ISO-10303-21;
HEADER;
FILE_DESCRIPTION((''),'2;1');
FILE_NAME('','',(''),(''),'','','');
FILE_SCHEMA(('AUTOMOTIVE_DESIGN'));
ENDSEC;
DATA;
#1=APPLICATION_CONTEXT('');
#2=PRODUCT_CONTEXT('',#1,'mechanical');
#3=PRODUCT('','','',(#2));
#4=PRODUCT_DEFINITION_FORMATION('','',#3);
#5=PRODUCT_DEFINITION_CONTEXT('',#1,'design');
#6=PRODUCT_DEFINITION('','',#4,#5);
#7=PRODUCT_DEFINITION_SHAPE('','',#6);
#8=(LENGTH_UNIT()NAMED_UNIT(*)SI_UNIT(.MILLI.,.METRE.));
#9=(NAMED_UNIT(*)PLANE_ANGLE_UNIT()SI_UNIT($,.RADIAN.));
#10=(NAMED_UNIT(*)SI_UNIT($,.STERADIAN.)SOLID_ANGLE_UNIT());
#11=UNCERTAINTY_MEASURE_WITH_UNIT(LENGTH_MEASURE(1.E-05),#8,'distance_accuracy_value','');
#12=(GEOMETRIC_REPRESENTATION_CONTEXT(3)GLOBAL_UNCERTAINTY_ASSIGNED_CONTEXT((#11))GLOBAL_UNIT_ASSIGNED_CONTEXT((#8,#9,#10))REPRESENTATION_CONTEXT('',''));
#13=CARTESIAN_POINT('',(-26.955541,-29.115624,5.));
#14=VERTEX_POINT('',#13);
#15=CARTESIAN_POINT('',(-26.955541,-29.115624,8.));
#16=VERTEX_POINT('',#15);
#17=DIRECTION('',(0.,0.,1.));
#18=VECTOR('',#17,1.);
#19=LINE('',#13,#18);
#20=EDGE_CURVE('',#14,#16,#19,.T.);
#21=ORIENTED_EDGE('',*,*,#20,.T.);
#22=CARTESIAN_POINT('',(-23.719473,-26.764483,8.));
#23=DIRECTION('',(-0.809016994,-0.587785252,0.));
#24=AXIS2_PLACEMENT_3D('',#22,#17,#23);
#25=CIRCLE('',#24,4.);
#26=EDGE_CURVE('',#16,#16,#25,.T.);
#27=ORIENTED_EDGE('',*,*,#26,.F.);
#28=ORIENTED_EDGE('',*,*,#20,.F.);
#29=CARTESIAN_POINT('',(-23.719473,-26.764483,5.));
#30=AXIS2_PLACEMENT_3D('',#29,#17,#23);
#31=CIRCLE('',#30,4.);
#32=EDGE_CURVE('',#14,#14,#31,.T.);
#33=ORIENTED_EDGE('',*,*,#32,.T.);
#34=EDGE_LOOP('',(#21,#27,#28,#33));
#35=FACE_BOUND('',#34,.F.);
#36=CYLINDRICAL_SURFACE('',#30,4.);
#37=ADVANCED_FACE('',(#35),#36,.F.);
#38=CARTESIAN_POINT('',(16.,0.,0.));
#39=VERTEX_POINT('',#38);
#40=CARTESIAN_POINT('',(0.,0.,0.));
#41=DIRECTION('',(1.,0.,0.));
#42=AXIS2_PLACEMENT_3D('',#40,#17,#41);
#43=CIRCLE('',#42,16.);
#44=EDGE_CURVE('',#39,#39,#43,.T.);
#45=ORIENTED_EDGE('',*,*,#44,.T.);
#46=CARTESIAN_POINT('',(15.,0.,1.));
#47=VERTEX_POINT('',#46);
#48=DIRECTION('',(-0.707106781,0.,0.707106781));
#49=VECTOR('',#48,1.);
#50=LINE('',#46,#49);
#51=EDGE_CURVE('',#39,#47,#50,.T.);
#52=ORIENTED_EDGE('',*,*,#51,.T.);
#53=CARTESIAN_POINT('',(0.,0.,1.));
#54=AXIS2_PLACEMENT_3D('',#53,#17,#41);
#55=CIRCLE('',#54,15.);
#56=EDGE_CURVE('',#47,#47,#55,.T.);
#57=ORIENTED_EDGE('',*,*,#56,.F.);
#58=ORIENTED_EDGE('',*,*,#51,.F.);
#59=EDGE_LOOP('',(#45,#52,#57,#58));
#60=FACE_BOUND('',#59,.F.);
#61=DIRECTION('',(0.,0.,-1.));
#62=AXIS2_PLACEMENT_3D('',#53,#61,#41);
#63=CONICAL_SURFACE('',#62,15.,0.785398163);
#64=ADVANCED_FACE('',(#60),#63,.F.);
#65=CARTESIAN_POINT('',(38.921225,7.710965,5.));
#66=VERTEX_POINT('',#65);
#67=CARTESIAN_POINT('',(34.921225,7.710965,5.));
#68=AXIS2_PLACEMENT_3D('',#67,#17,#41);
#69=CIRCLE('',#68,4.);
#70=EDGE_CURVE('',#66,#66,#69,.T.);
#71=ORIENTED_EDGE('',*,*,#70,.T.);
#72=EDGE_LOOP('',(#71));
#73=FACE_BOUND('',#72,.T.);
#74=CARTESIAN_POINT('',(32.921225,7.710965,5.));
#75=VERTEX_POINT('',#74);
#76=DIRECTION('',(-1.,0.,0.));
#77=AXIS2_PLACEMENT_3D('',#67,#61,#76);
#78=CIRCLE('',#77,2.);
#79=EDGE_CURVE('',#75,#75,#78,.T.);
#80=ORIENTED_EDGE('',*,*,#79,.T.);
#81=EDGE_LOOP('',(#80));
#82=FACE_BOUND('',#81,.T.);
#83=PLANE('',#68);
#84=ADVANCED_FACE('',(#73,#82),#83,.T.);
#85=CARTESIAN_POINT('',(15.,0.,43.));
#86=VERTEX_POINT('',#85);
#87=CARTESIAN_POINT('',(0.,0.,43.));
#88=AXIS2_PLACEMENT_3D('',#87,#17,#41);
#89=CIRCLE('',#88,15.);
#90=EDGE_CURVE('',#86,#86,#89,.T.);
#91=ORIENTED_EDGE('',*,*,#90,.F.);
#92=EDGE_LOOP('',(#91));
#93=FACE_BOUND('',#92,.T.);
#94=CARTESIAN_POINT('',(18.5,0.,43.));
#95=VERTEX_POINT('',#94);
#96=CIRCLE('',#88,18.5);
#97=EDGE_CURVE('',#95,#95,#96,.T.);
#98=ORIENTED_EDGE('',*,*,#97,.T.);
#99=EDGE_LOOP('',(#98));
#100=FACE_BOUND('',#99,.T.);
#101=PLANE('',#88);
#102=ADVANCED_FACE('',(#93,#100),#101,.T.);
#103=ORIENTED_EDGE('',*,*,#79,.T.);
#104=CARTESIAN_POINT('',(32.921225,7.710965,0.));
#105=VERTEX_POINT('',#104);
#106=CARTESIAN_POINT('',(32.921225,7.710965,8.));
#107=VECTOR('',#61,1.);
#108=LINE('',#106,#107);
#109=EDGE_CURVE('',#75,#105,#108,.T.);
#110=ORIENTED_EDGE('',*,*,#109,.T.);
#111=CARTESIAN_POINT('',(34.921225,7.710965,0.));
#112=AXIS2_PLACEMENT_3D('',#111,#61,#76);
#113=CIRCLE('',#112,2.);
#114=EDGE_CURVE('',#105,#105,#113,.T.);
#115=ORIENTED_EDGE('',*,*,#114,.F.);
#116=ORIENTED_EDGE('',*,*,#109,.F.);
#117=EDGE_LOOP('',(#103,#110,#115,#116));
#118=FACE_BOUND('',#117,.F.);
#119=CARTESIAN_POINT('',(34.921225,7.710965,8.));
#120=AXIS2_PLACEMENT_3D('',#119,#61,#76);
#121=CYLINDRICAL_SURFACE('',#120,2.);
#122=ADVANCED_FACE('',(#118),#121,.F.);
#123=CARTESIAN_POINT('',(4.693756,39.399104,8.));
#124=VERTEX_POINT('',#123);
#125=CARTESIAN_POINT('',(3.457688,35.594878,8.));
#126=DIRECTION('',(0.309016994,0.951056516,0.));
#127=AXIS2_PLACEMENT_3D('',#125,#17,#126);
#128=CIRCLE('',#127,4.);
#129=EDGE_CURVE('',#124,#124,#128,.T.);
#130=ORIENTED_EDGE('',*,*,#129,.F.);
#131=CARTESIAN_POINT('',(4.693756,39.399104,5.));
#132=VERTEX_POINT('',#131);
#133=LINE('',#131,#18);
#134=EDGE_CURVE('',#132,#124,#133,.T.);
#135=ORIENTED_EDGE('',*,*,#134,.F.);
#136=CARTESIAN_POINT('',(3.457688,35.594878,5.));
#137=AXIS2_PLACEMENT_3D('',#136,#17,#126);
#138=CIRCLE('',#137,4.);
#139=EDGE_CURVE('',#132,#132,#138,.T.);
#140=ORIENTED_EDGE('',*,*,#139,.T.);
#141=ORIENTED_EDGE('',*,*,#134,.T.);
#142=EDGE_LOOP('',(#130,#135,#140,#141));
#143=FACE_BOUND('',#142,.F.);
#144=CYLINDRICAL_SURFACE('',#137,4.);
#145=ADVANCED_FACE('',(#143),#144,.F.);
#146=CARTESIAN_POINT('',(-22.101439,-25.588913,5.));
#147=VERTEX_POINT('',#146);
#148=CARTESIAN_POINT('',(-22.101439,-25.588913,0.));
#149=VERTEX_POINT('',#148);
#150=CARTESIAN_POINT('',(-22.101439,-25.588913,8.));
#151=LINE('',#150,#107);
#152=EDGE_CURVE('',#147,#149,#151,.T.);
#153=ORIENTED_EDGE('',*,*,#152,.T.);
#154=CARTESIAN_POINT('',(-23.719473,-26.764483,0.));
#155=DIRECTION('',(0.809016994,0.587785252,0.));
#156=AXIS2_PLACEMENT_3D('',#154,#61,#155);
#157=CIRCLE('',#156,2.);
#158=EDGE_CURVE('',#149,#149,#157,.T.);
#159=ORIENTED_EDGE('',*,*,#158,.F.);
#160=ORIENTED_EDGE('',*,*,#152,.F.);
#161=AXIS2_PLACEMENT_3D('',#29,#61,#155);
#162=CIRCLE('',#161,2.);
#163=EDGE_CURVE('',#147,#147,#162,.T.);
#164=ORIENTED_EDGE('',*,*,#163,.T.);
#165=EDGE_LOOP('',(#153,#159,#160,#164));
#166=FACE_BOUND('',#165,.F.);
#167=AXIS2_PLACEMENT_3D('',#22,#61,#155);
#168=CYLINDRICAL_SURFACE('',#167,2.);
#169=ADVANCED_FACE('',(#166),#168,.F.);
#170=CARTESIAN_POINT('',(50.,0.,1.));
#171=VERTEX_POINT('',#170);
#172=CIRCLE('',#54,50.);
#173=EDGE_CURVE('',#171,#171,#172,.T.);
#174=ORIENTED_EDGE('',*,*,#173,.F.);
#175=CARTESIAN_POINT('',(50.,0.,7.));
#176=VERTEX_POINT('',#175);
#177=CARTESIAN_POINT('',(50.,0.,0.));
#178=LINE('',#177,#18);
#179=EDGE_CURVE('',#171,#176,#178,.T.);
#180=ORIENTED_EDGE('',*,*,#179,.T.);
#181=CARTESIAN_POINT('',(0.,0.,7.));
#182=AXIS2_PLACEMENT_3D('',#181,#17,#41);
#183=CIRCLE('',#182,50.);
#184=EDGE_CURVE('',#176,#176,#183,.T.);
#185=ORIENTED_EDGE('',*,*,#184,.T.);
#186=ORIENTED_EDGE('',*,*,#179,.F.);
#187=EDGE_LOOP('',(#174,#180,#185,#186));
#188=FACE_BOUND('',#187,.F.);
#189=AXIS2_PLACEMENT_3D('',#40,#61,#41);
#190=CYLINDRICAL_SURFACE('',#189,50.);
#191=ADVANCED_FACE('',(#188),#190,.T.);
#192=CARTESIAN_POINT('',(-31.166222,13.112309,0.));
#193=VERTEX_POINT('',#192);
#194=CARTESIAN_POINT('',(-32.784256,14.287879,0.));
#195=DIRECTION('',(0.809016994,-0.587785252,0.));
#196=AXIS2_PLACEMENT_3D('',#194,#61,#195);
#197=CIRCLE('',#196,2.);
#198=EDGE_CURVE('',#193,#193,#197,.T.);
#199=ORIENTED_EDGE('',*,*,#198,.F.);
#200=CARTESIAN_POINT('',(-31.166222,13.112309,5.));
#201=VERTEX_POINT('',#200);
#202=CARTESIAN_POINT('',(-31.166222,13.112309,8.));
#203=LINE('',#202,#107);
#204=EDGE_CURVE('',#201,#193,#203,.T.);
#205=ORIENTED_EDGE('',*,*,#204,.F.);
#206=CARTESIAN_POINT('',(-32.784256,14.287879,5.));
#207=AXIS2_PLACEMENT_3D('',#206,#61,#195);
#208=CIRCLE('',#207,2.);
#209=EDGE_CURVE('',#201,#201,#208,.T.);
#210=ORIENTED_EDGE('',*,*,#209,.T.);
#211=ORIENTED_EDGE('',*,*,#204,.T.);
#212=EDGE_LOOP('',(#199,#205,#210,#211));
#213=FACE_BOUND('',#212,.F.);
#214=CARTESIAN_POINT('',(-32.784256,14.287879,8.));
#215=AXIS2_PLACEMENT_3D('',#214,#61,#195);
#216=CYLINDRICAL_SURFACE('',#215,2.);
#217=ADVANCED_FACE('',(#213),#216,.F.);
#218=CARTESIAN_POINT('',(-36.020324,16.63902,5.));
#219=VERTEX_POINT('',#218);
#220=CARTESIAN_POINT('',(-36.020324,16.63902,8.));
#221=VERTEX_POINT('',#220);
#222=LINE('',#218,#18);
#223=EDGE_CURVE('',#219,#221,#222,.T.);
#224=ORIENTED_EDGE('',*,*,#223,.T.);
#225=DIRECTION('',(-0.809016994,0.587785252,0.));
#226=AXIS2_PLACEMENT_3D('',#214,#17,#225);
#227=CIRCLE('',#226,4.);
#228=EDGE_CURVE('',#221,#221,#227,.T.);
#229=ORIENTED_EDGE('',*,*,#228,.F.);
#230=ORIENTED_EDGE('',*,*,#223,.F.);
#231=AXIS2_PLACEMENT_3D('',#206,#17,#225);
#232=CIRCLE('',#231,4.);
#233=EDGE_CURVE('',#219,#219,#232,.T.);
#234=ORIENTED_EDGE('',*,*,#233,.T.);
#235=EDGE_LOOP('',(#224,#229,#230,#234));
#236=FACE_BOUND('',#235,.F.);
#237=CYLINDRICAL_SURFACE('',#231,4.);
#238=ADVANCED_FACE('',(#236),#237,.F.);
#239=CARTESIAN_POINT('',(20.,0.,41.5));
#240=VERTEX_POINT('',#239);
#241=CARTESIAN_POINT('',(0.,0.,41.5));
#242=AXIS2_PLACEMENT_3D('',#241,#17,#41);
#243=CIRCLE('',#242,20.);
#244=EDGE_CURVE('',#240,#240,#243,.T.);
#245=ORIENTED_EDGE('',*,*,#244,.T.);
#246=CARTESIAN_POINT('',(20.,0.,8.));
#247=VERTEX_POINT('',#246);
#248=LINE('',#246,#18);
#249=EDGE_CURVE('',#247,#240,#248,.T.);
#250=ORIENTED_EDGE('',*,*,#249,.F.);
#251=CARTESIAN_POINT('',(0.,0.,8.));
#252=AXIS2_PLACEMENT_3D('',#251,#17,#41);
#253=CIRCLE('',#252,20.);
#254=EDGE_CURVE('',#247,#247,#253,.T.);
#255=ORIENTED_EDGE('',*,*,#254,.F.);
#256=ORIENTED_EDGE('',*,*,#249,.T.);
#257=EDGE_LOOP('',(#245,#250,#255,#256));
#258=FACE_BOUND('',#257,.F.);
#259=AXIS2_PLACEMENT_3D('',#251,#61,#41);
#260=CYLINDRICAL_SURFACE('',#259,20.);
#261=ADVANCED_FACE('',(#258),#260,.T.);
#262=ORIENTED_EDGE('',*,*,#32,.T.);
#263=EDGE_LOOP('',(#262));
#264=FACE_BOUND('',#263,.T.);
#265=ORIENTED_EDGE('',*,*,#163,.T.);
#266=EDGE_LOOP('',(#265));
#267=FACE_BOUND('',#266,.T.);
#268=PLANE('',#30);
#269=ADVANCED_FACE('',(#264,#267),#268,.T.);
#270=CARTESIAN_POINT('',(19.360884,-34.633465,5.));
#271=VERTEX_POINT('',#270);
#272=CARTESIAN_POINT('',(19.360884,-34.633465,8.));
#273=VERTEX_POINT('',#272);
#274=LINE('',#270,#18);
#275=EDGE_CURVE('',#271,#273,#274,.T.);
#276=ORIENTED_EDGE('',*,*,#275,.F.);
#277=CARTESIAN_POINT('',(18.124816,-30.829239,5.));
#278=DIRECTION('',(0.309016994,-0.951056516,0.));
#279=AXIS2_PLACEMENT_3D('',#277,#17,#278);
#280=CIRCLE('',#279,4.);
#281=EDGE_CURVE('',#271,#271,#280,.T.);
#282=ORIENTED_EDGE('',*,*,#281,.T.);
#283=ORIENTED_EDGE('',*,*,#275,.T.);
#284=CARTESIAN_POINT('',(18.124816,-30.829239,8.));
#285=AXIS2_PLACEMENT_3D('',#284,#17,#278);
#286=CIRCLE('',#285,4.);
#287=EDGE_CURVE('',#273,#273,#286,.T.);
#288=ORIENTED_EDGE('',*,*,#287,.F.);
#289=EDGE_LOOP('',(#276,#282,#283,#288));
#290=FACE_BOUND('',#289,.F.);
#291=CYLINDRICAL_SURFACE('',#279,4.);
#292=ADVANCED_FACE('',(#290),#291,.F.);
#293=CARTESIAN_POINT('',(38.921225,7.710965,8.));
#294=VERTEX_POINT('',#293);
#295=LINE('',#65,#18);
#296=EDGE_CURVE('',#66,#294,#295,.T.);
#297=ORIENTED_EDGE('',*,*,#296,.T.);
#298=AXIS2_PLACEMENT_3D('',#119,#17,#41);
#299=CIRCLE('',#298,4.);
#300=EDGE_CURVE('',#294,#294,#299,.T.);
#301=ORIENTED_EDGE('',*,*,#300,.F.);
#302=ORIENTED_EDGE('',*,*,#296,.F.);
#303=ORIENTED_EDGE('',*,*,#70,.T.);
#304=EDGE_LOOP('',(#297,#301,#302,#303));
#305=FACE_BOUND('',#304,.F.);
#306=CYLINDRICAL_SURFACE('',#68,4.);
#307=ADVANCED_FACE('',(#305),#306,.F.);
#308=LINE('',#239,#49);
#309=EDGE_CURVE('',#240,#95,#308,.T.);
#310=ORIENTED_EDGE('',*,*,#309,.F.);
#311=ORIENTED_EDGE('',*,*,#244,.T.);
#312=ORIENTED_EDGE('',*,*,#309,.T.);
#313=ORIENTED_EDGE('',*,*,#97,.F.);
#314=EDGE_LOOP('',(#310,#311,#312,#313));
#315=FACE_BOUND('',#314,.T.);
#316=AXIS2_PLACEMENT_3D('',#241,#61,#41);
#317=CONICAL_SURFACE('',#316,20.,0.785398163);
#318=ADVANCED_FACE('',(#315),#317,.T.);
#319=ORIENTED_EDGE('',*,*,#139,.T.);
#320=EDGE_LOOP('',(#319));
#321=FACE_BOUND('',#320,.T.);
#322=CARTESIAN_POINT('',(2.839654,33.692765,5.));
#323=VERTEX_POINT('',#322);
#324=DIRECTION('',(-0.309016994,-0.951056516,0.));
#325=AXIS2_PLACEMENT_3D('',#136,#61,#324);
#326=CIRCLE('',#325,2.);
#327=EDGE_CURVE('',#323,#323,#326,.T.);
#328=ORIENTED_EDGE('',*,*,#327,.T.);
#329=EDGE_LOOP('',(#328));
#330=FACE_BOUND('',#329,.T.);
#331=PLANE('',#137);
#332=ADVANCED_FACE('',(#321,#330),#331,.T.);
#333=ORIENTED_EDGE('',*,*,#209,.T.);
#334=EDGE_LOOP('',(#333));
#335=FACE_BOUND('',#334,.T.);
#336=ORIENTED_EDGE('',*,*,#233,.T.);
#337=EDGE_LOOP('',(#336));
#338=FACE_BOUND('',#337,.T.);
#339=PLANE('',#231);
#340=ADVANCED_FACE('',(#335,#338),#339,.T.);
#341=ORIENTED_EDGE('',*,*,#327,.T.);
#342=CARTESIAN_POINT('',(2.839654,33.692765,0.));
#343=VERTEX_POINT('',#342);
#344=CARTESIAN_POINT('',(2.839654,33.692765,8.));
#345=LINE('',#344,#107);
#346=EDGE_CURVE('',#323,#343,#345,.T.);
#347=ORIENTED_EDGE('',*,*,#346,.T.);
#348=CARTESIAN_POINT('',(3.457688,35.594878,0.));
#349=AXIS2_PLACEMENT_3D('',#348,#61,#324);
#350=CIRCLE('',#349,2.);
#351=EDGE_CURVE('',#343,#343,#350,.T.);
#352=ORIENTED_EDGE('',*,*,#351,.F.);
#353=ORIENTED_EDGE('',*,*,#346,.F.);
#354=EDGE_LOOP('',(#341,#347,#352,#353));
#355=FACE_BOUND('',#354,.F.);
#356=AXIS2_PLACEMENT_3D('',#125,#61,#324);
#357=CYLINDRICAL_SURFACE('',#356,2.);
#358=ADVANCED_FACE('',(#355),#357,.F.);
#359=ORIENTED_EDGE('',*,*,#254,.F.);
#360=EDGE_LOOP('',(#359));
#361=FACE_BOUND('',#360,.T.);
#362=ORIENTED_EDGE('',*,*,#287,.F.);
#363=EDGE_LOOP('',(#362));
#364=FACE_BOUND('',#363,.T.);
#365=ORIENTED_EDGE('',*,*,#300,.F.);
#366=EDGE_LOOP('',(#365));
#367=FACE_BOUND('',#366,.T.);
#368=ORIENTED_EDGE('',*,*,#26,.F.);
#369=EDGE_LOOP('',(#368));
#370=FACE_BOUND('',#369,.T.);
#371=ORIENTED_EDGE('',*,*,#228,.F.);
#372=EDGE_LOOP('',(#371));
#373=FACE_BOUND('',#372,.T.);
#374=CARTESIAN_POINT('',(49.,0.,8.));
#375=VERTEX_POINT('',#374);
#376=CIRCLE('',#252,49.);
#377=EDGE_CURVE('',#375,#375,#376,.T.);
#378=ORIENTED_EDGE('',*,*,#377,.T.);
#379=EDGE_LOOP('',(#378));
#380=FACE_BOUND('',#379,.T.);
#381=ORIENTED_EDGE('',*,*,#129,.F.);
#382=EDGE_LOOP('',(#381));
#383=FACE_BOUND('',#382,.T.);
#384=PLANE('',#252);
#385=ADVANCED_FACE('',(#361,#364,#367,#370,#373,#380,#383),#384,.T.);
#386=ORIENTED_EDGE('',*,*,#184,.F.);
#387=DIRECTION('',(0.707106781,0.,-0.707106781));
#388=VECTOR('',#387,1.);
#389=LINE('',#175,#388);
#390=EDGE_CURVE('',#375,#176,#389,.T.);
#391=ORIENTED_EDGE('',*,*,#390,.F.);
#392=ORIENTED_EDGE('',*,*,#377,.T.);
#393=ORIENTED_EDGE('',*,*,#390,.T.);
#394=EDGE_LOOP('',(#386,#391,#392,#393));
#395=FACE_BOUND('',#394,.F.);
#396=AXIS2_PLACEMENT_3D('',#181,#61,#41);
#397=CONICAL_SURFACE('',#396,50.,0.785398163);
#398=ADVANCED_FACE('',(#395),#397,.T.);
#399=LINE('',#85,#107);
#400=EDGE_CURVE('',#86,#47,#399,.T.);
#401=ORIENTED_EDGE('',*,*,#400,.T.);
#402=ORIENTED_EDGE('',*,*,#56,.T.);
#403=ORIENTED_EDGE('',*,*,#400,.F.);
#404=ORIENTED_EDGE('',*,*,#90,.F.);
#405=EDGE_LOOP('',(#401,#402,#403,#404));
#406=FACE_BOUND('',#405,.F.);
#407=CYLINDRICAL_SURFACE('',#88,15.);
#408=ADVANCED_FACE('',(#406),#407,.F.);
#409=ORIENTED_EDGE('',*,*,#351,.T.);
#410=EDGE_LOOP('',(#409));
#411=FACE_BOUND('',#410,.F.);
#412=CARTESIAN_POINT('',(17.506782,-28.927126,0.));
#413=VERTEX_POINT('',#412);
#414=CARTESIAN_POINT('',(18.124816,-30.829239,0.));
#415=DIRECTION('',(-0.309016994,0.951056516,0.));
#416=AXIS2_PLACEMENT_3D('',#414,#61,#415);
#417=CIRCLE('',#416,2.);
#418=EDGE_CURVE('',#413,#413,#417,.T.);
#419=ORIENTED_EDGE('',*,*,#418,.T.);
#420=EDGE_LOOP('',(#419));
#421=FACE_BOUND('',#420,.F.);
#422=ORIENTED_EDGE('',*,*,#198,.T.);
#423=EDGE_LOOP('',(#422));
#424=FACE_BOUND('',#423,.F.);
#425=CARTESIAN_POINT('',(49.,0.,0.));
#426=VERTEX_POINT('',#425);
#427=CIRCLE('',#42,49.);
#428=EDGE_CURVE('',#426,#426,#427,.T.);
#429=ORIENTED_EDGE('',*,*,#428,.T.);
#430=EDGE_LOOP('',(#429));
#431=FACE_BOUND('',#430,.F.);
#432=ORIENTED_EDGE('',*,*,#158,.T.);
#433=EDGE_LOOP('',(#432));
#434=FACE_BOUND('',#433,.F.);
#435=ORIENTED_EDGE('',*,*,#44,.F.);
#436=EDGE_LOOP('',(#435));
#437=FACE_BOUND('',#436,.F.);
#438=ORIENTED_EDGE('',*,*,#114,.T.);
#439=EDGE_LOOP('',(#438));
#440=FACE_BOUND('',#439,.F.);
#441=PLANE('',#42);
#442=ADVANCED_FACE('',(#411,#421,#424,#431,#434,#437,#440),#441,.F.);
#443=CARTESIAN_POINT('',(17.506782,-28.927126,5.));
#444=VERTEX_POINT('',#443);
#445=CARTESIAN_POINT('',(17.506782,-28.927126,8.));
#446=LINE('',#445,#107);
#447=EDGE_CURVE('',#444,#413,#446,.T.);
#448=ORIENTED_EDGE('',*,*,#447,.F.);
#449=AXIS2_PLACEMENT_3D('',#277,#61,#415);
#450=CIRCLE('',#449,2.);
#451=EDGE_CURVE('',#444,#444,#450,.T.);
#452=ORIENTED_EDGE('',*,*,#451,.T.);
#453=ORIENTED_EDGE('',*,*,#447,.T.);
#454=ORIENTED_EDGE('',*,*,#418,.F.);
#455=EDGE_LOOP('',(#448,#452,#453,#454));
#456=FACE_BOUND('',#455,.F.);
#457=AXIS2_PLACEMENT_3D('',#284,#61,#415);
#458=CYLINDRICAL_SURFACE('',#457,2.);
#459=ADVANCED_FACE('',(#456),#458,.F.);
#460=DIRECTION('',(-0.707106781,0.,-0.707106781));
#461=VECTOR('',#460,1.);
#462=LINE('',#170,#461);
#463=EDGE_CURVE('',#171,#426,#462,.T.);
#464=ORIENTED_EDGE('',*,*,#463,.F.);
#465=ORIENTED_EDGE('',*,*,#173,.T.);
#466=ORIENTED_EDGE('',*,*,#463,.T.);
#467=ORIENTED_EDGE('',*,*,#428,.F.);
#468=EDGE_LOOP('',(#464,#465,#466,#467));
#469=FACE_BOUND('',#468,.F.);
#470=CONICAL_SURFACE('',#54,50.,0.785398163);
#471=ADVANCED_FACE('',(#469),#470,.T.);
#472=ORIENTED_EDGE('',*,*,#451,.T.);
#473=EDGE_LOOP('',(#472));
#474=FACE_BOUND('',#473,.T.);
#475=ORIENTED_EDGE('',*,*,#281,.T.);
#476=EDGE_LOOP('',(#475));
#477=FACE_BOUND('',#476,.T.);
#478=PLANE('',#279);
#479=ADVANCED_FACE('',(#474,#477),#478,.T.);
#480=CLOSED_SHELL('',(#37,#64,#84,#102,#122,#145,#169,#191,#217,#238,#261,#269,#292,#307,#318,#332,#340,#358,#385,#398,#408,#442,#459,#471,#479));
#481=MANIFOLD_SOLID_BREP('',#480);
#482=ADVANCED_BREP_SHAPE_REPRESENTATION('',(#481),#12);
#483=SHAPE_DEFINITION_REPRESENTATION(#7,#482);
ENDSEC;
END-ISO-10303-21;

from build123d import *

# Parameters (mm, degrees)
F0_R            = 50
F1_DEPTH        = 8
F2_R            = 20
F3_DEPTH        = 35
F5_D            = 4
F5_DEPTH        = 12
F5_CBORE_D      = 8
F5_CBORE_DEPTH  = 3
F5_TIP          = 1.2017212381
F5_COPIES_COUNT = 5
F6_SIZE         = 1.5
F7_R            = 15
F8_DEPTH        = 43.001
F9_SIZE         = 1
F10_SIZE        = 1


# Not quite as in the source:
# - a pattern or mirror of a feature is missing from the dataset's text; its kind, count and spacing are read off the source's solid


with BuildPart() as f1:
    # F0 (on Top) → F1 (new body)
    with BuildSketch(Plane.XY):
        Circle(F0_R)
    extrude(amount=F1_DEPTH)

    # F2 (on face) → F3 (join)
    with BuildSketch(Plane.XY.offset(8)):
        Circle(F2_R)
    extrude(amount=F3_DEPTH)

    # F5
    with Locations(Plane.XY.offset(8)):
        with Locations((34.9212251604, 7.7109653503)):
            f5 = CounterBoreHole(F5_D / 2, F5_CBORE_D / 2, F5_CBORE_DEPTH, depth=F5_DEPTH)
            with Locations((0, 0, -(F5_DEPTH + F5_TIP / 2))):  # 118° drill point
                Cone(0, F5_D / 2, F5_TIP, mode=Mode.SUBTRACT)

    # F5_copies: F5 ×5 about axis
    f5_copies_axis = Axis((0, 0, 0), (0, 0, 1))
    for i in range(1, F5_COPIES_COUNT):
        add(f5.rotate(f5_copies_axis, i * 360 / F5_COPIES_COUNT), mode=Mode.SUBTRACT)

    # F6
    f6_edges = [f1.edges().sort_by_distance(p)[0] for p in [
        (-20, 0, 43),
    ]]
    chamfer(f6_edges, length=F6_SIZE)

    # F7 (on face) → F8 (cut, through all)
    with BuildSketch(Plane.XY.offset(43)):
        Circle(F7_R)
    extrude(amount=-F8_DEPTH, mode=Mode.SUBTRACT)

    # F9
    f9_edges = [f1.edges().sort_by_distance(p)[0] for p in [
        (-50, 0, 8),
        (-50, 0, 0),
    ]]
    chamfer(f9_edges, length=F9_SIZE)

    # F10
    f10_edges = [f1.edges().sort_by_distance(p)[0] for p in [
        (-15, 0, 0),
    ]]
    chamfer(f10_edges, length=F10_SIZE)


solid = f1.part
